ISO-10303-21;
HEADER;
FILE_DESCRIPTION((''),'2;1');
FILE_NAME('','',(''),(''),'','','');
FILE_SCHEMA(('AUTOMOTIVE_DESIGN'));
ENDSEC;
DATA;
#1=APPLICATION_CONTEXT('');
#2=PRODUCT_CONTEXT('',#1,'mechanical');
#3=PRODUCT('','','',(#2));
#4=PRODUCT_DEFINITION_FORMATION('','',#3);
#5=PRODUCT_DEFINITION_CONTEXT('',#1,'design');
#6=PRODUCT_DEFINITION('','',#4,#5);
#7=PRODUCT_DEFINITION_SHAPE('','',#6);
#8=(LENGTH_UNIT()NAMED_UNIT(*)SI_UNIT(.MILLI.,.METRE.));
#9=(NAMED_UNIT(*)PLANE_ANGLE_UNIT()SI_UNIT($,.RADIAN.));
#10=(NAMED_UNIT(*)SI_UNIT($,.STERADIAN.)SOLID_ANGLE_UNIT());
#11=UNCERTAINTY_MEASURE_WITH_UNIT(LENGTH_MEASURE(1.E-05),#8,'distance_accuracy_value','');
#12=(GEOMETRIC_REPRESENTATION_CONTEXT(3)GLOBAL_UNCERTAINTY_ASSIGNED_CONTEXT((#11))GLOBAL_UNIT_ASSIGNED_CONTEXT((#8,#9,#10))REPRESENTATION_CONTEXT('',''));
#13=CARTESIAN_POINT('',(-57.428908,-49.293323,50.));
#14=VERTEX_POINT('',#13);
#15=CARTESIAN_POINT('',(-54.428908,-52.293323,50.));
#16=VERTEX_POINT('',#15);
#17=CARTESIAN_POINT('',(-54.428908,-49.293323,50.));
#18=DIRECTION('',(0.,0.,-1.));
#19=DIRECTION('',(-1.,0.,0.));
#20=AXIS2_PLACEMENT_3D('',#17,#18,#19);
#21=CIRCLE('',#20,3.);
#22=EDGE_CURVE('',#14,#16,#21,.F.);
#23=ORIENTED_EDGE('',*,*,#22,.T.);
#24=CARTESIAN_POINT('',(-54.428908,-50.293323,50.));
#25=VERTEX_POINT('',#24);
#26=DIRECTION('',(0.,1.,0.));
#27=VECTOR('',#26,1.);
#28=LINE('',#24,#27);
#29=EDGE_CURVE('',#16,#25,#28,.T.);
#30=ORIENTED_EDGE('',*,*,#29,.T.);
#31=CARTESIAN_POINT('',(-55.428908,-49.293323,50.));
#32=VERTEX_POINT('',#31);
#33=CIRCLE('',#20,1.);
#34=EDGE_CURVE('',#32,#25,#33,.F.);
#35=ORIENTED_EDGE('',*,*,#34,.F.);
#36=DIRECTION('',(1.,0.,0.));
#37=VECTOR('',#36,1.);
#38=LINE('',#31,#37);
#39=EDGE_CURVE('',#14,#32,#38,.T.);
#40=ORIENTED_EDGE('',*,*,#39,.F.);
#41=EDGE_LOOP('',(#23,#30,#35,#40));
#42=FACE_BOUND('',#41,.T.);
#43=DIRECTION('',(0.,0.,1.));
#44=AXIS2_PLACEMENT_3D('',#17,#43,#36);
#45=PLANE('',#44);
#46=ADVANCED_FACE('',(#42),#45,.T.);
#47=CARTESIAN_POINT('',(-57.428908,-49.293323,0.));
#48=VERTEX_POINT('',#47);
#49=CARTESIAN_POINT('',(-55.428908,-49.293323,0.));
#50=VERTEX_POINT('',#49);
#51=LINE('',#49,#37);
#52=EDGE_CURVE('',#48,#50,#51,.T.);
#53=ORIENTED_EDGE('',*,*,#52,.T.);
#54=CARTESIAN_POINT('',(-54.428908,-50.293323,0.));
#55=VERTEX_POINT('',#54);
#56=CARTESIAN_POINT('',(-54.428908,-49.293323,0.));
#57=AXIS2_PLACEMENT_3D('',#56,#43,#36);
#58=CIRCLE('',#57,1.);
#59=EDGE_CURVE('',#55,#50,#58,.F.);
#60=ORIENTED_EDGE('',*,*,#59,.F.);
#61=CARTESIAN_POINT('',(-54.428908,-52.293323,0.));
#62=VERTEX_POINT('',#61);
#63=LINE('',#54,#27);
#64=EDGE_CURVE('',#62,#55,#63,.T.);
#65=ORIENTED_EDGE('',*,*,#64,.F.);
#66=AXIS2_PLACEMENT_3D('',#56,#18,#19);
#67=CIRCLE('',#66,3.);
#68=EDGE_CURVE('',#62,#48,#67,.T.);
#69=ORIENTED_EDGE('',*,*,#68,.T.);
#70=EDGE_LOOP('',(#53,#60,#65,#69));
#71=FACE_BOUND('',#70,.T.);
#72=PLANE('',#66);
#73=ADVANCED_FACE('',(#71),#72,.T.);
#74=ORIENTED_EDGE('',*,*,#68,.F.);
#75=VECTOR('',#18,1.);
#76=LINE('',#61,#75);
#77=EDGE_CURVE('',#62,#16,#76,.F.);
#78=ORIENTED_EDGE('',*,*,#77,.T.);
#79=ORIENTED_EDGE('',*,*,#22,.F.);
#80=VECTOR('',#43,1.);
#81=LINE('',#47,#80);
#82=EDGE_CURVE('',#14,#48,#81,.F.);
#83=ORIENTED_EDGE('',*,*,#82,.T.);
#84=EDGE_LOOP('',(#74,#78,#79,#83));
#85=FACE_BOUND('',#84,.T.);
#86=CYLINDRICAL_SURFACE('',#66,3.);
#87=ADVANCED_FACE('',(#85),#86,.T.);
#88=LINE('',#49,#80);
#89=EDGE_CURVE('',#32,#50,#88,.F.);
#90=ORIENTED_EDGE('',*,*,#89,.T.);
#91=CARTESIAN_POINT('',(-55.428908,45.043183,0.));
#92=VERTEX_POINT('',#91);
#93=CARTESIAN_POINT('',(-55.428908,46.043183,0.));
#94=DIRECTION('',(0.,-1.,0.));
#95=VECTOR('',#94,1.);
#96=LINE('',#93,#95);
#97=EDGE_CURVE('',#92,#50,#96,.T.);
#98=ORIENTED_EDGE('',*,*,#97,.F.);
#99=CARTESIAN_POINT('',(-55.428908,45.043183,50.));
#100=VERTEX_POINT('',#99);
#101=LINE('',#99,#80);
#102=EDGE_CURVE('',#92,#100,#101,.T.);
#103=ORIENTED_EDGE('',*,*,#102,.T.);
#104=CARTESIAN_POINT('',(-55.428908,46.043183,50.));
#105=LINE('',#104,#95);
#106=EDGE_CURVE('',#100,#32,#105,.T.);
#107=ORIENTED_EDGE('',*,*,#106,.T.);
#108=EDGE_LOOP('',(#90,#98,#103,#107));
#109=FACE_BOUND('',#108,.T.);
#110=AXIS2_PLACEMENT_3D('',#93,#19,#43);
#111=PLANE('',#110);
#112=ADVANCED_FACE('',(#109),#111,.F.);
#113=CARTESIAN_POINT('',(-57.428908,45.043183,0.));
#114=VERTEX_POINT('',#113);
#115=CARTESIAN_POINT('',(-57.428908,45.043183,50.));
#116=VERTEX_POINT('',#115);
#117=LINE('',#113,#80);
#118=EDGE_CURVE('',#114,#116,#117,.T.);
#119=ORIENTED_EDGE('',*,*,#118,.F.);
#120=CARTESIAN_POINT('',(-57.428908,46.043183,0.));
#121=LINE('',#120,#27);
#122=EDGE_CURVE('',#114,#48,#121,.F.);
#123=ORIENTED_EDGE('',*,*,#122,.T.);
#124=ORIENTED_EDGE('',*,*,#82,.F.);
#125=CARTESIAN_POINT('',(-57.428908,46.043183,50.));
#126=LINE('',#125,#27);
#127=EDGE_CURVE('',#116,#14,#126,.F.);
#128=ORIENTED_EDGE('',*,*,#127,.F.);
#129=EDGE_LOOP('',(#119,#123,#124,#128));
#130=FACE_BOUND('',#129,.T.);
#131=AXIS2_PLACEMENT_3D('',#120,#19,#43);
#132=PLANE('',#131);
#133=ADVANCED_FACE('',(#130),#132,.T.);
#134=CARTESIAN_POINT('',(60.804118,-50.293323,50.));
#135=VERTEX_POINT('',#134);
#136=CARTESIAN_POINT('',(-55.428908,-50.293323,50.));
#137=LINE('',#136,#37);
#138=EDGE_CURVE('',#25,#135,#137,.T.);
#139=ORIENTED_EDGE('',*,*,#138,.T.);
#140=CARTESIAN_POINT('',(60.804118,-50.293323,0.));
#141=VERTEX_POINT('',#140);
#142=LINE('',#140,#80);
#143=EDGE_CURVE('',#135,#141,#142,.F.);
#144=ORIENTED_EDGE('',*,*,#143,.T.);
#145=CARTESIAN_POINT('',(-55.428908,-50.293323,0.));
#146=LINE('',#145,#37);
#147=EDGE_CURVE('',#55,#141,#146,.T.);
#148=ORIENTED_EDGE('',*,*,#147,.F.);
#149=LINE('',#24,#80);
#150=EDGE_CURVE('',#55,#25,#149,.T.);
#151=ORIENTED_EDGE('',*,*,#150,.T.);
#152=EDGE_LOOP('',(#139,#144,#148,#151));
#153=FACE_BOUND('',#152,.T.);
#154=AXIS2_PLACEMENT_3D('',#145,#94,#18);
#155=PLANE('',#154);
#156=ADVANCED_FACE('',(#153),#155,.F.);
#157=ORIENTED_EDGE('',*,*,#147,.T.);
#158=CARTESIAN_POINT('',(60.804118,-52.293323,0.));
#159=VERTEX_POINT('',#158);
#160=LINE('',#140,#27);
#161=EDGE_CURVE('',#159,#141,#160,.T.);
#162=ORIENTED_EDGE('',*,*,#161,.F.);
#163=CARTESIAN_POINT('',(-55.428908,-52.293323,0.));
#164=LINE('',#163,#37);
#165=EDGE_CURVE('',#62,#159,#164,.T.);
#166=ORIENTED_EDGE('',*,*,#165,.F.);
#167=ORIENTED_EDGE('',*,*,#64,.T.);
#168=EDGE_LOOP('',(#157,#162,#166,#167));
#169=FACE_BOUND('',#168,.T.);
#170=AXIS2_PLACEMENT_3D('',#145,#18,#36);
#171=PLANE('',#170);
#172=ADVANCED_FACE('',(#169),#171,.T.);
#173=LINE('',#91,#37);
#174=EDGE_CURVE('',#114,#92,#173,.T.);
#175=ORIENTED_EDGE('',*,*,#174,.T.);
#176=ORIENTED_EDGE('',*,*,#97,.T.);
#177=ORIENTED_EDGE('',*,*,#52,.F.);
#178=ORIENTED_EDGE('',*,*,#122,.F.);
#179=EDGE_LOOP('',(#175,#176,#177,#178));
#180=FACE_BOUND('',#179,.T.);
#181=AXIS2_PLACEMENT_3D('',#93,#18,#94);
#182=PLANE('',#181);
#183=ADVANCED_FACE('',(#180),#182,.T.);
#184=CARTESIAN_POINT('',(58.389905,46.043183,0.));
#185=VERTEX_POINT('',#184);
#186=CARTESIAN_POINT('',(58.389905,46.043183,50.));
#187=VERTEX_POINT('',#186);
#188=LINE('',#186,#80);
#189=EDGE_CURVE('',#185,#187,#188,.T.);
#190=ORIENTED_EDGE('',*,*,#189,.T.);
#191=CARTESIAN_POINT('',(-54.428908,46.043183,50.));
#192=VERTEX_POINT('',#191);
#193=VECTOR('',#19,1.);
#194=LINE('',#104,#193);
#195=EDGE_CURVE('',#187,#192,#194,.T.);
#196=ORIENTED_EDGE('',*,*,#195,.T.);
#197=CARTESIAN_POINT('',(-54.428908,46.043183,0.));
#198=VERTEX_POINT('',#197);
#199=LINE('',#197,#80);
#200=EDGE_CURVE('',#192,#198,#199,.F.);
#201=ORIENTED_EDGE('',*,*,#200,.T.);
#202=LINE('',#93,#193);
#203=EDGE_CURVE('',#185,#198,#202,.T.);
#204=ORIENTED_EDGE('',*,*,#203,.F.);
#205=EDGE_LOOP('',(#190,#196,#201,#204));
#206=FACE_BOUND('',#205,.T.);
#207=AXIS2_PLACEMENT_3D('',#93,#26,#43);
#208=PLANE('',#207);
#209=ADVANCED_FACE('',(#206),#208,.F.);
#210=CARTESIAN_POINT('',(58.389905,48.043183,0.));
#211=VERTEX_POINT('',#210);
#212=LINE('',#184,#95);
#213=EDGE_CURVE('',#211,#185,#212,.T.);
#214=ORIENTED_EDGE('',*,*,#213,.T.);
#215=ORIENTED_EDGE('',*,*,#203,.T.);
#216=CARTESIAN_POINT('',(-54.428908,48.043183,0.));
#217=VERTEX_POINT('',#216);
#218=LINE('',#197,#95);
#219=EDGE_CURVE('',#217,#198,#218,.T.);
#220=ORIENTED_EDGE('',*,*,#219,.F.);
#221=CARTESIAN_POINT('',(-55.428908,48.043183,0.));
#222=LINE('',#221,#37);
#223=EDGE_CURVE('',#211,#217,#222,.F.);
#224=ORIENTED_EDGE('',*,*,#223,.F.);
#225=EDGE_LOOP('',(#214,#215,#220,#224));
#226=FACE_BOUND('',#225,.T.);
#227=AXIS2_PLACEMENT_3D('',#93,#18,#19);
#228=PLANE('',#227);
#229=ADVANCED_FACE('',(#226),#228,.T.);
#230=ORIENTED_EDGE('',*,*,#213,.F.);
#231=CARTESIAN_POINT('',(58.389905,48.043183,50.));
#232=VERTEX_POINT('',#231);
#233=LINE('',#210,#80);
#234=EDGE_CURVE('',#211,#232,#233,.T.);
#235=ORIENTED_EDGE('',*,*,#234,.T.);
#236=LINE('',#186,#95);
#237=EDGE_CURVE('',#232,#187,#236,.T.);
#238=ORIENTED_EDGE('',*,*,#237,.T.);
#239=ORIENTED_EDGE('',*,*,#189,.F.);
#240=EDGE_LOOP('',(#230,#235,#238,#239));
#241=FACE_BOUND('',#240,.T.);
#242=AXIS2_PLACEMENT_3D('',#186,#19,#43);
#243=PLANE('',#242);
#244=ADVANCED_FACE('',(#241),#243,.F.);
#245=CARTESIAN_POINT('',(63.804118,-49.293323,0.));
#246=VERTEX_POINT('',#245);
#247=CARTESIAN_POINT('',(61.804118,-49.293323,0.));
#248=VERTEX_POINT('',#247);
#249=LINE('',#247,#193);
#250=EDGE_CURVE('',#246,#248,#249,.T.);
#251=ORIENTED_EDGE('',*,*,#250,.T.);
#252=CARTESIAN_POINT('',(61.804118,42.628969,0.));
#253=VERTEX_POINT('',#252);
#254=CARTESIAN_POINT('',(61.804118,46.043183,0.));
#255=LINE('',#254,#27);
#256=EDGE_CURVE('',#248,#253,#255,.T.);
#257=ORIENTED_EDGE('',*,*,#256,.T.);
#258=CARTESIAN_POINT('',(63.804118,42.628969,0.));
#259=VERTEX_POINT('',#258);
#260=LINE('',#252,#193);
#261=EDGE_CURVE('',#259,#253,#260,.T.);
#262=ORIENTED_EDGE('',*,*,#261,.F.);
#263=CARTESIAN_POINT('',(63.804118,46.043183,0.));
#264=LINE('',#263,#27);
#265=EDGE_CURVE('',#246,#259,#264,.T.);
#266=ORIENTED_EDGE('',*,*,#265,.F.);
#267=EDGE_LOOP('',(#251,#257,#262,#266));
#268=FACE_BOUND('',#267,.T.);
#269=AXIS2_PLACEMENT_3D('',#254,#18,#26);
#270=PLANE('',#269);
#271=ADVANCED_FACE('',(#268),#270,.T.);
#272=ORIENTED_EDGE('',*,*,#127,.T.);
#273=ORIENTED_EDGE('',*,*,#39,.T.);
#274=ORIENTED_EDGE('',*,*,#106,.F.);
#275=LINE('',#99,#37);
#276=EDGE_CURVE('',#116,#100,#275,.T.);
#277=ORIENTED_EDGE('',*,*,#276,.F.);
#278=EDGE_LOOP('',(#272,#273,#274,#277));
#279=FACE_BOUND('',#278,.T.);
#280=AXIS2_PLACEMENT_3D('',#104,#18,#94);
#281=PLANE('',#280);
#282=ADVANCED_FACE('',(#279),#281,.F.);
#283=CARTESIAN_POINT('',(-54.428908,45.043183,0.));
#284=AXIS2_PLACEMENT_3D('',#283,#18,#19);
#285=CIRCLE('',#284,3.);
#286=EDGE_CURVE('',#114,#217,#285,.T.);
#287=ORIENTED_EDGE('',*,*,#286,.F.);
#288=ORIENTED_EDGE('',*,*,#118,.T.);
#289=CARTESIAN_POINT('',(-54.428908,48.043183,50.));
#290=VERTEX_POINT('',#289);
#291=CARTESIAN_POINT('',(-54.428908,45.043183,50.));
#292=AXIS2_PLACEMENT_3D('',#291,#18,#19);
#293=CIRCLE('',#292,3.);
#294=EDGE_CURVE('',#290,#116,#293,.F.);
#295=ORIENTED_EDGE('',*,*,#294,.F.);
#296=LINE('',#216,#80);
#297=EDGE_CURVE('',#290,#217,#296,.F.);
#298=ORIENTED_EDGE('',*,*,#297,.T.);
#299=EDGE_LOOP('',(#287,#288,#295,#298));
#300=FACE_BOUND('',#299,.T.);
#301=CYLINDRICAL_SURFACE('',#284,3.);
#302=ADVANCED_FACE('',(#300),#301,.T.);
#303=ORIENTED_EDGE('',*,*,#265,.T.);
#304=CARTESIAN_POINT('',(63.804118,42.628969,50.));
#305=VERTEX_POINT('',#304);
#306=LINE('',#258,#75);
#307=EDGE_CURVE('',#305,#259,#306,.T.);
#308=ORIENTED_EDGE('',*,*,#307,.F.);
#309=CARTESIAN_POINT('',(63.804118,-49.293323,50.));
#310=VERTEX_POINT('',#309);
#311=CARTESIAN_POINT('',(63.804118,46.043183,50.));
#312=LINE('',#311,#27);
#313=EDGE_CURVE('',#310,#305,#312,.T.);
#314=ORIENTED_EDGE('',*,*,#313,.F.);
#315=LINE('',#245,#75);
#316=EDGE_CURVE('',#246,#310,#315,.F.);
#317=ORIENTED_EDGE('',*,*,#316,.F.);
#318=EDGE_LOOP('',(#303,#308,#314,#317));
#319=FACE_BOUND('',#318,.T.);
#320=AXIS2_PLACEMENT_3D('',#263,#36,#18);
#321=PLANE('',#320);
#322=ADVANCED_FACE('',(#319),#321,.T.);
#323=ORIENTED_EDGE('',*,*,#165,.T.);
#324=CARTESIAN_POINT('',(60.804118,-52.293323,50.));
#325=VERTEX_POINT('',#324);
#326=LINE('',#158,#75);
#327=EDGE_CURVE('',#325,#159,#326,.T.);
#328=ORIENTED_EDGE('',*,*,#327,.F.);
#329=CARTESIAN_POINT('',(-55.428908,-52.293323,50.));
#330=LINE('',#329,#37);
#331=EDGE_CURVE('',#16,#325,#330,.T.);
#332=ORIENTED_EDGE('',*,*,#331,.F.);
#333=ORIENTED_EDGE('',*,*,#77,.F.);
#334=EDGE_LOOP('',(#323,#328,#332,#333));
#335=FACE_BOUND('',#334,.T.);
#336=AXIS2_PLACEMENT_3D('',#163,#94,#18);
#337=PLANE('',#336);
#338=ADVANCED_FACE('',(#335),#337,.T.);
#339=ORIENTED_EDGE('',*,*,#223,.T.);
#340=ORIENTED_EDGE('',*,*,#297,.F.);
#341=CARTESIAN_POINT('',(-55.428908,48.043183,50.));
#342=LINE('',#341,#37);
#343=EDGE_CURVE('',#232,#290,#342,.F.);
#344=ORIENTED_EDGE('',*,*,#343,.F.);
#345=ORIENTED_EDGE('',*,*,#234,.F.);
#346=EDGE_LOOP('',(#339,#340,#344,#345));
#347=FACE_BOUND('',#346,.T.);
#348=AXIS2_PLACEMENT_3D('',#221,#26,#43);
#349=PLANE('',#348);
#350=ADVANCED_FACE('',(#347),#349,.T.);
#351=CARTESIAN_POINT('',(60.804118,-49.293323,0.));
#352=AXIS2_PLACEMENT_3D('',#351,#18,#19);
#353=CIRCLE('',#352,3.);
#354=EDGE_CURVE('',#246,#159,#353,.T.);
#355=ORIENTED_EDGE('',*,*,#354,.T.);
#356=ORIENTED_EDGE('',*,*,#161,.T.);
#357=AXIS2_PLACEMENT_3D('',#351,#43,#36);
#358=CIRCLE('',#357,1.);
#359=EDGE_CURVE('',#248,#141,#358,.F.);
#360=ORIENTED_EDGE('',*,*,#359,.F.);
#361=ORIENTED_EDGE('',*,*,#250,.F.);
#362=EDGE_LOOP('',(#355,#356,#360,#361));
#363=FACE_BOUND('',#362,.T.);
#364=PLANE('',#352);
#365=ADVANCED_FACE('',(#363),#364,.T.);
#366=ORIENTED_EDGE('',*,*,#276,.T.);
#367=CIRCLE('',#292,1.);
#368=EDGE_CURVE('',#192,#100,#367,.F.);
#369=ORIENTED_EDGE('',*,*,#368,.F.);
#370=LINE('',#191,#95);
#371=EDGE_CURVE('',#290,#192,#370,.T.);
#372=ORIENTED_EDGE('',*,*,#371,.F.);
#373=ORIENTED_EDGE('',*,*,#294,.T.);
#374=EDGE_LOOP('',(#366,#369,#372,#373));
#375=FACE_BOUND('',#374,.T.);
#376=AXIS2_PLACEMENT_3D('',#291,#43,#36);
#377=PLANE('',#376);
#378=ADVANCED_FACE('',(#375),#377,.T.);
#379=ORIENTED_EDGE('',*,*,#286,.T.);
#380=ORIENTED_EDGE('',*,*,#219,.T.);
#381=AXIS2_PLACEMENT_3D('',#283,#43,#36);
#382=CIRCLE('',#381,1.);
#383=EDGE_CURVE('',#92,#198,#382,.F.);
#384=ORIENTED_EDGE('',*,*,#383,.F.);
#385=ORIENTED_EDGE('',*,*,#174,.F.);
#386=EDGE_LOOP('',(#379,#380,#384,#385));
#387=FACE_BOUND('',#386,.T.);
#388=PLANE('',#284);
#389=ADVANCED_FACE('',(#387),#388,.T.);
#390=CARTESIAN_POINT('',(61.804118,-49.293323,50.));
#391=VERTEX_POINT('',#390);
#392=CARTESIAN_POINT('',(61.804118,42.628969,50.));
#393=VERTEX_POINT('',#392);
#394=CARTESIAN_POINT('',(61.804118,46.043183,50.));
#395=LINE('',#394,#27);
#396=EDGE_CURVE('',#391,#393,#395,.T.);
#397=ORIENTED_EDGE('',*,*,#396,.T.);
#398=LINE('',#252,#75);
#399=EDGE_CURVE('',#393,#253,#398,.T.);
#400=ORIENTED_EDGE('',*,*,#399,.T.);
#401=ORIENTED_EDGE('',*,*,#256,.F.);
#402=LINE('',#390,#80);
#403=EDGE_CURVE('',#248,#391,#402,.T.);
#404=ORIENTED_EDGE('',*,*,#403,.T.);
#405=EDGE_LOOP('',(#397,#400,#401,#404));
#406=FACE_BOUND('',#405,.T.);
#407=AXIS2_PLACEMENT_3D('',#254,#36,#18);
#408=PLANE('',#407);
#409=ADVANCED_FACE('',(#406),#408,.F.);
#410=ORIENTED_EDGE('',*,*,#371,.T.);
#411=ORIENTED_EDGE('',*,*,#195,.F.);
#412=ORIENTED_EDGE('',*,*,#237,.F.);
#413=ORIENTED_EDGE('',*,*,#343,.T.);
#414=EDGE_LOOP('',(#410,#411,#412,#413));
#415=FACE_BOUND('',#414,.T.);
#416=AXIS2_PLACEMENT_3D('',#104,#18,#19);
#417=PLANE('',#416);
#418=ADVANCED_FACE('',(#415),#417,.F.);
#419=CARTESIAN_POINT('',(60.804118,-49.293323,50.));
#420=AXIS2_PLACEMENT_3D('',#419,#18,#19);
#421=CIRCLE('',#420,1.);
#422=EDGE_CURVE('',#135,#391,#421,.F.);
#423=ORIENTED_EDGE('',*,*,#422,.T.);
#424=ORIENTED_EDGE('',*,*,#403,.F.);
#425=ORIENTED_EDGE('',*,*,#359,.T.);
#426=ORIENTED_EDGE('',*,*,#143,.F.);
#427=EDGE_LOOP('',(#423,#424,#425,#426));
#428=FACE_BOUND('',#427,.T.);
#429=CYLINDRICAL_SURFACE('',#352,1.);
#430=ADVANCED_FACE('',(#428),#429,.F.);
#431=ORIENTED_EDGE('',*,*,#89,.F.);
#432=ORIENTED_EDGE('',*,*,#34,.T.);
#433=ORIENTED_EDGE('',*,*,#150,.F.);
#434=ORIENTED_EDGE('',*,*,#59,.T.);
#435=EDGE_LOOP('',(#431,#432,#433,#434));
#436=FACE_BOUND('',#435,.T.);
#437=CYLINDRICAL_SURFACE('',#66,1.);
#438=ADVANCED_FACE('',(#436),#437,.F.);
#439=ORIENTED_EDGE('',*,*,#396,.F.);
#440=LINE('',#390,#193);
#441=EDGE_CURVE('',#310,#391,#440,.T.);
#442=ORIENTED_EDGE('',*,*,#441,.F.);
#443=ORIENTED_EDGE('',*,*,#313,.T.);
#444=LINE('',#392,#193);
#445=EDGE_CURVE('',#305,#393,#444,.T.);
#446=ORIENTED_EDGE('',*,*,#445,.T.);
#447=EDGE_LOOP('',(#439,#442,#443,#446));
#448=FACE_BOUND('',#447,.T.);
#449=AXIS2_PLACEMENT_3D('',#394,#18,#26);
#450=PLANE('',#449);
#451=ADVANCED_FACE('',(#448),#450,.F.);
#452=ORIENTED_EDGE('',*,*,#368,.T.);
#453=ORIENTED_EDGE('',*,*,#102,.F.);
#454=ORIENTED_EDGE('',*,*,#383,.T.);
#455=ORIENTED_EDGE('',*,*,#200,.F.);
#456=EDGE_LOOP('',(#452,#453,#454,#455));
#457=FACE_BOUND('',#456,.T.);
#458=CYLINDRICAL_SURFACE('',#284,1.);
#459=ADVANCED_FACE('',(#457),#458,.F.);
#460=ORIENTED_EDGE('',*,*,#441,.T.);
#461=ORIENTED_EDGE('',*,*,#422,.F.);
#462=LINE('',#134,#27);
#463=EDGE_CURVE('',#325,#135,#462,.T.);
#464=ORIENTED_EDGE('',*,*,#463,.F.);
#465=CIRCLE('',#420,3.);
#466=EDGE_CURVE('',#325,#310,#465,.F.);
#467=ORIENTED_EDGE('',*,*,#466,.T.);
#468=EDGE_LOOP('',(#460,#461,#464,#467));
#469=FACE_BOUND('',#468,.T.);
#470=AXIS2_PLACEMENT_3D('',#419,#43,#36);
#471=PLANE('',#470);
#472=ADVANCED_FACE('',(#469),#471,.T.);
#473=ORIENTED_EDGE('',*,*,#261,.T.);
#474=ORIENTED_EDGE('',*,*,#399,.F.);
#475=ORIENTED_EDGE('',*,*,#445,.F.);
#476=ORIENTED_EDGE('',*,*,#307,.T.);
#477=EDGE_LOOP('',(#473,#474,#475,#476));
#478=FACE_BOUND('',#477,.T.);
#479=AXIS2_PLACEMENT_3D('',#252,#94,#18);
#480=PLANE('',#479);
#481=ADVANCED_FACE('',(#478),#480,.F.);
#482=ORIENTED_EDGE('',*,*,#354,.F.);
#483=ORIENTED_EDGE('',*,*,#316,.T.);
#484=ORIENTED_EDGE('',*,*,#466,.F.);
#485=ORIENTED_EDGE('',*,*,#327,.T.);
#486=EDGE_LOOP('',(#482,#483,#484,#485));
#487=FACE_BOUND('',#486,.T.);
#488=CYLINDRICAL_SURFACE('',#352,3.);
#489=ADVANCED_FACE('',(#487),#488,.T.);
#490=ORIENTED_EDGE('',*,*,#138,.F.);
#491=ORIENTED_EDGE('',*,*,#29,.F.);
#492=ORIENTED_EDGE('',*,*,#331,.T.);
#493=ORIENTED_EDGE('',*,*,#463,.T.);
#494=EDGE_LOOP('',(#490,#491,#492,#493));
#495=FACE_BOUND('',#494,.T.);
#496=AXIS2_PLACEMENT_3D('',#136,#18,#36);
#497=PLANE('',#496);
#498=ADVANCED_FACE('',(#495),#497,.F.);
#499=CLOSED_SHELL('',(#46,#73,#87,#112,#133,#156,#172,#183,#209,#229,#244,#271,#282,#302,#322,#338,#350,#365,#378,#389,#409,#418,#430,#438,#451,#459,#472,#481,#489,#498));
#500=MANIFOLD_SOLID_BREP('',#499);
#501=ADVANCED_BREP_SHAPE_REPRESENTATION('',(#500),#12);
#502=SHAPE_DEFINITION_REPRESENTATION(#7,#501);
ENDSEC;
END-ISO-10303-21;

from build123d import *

# Parameters (mm, degrees)
SHEET_EXTRUDE_1_1_DEPTH = 50
THICKEN_1_T1            = 2
SHEET_METAL_1_DEPTH     = 50
SHEET_METAL_1_2_DEPTH   = 50


# Read off the part's stored shape, not the designer's step: Преобразовать-Твердое тело1
with BuildPart() as body_1:
    # Sheet Extrude 1: a surface, the sketch's curves swept straight by 50 mm
    with BuildLine(Plane.XY, mode=Mode.PRIVATE) as sheet_extrude_1_1_path:
        Line((-55.428908385, 46.043182684), (61.804118295, 46.043182684))
        Line((61.804118295, 46.043182684), (61.804118295, -50.293322624))
        Line((61.804118295, -50.293322624), (-55.428908385, -50.293322624))
        Line((-55.428908385, -50.293322624), (-55.428908385, 46.043182684))
    sheet_extrude_1_1 = Shell.extrude(sheet_extrude_1_1_path.wire(), (0 * SHEET_EXTRUDE_1_1_DEPTH, 0 * SHEET_EXTRUDE_1_1_DEPTH, 1 * SHEET_EXTRUDE_1_1_DEPTH))
    add(Solid.thicken(sheet_extrude_1_1, THICKEN_1_T1))

    # Sheet Metal 1 outline → Sheet Metal 1 (cut)
    with BuildSketch(Plane.XY):
        Polygon((61.804118295, 46.043182684), (61.804118295, 42.628969122), (63.804118295, 42.628969122), (63.804118295, 48.043182684), (58.389904733, 48.043182684), (58.389904733, 46.043182684), align=None)
        with BuildLine():
            Line((63.804118295, -52.293322624), (63.804118295, -49.293322624))
            ThreePointArc((63.804118295, -49.293322624), (62.925438639, -51.414642968), (60.804118295, -52.293322624))
            Line((60.804118295, -52.293322624), (63.804118295, -52.293322624))
        make_face()
        with BuildLine():
            Line((-57.428908385, -52.293322624), (-54.428908385, -52.293322624))
            ThreePointArc((-54.428908385, -52.293322624), (-56.550228729, -51.414642968), (-57.428908385, -49.293322624))
            Line((-57.428908385, -49.293322624), (-57.428908385, -52.293322624))
        make_face()
        with BuildLine():
            ThreePointArc((-57.428908385, 45.043182684), (-56.550228729, 47.164503028), (-54.428908385, 48.043182684))
            Line((-54.428908385, 48.043182684), (-57.428908385, 48.043182684))
            Line((-57.428908385, 48.043182684), (-57.428908385, 45.043182684))
        make_face()
    extrude(amount=SHEET_METAL_1_DEPTH, mode=Mode.SUBTRACT)

    # Sheet Metal 1 2 outline → Sheet Metal 1 2 (add)
    with BuildSketch(Plane.XY):
        with BuildLine():
            Line((61.804118295, -50.293322624), (61.804118295, -49.293322624))
            ThreePointArc((61.804118295, -49.293322624), (61.511225076, -50.000429405), (60.804118295, -50.293322624))
            Line((60.804118295, -50.293322624), (61.804118295, -50.293322624))
        make_face()
        with BuildLine():
            Line((-55.428908385, -50.293322624), (-54.428908385, -50.293322624))
            ThreePointArc((-54.428908385, -50.293322624), (-55.136015166, -50.000429405), (-55.428908385, -49.293322624))
            Line((-55.428908385, -49.293322624), (-55.428908385, -50.293322624))
        make_face()
        with BuildLine():
            ThreePointArc((-55.428908385, 45.043182684), (-55.136015166, 45.750289465), (-54.428908385, 46.043182684))
            Line((-54.428908385, 46.043182684), (-55.428908385, 46.043182684))
            Line((-55.428908385, 46.043182684), (-55.428908385, 45.043182684))
        make_face()
    extrude(amount=SHEET_METAL_1_2_DEPTH)


solid = body_1.part
